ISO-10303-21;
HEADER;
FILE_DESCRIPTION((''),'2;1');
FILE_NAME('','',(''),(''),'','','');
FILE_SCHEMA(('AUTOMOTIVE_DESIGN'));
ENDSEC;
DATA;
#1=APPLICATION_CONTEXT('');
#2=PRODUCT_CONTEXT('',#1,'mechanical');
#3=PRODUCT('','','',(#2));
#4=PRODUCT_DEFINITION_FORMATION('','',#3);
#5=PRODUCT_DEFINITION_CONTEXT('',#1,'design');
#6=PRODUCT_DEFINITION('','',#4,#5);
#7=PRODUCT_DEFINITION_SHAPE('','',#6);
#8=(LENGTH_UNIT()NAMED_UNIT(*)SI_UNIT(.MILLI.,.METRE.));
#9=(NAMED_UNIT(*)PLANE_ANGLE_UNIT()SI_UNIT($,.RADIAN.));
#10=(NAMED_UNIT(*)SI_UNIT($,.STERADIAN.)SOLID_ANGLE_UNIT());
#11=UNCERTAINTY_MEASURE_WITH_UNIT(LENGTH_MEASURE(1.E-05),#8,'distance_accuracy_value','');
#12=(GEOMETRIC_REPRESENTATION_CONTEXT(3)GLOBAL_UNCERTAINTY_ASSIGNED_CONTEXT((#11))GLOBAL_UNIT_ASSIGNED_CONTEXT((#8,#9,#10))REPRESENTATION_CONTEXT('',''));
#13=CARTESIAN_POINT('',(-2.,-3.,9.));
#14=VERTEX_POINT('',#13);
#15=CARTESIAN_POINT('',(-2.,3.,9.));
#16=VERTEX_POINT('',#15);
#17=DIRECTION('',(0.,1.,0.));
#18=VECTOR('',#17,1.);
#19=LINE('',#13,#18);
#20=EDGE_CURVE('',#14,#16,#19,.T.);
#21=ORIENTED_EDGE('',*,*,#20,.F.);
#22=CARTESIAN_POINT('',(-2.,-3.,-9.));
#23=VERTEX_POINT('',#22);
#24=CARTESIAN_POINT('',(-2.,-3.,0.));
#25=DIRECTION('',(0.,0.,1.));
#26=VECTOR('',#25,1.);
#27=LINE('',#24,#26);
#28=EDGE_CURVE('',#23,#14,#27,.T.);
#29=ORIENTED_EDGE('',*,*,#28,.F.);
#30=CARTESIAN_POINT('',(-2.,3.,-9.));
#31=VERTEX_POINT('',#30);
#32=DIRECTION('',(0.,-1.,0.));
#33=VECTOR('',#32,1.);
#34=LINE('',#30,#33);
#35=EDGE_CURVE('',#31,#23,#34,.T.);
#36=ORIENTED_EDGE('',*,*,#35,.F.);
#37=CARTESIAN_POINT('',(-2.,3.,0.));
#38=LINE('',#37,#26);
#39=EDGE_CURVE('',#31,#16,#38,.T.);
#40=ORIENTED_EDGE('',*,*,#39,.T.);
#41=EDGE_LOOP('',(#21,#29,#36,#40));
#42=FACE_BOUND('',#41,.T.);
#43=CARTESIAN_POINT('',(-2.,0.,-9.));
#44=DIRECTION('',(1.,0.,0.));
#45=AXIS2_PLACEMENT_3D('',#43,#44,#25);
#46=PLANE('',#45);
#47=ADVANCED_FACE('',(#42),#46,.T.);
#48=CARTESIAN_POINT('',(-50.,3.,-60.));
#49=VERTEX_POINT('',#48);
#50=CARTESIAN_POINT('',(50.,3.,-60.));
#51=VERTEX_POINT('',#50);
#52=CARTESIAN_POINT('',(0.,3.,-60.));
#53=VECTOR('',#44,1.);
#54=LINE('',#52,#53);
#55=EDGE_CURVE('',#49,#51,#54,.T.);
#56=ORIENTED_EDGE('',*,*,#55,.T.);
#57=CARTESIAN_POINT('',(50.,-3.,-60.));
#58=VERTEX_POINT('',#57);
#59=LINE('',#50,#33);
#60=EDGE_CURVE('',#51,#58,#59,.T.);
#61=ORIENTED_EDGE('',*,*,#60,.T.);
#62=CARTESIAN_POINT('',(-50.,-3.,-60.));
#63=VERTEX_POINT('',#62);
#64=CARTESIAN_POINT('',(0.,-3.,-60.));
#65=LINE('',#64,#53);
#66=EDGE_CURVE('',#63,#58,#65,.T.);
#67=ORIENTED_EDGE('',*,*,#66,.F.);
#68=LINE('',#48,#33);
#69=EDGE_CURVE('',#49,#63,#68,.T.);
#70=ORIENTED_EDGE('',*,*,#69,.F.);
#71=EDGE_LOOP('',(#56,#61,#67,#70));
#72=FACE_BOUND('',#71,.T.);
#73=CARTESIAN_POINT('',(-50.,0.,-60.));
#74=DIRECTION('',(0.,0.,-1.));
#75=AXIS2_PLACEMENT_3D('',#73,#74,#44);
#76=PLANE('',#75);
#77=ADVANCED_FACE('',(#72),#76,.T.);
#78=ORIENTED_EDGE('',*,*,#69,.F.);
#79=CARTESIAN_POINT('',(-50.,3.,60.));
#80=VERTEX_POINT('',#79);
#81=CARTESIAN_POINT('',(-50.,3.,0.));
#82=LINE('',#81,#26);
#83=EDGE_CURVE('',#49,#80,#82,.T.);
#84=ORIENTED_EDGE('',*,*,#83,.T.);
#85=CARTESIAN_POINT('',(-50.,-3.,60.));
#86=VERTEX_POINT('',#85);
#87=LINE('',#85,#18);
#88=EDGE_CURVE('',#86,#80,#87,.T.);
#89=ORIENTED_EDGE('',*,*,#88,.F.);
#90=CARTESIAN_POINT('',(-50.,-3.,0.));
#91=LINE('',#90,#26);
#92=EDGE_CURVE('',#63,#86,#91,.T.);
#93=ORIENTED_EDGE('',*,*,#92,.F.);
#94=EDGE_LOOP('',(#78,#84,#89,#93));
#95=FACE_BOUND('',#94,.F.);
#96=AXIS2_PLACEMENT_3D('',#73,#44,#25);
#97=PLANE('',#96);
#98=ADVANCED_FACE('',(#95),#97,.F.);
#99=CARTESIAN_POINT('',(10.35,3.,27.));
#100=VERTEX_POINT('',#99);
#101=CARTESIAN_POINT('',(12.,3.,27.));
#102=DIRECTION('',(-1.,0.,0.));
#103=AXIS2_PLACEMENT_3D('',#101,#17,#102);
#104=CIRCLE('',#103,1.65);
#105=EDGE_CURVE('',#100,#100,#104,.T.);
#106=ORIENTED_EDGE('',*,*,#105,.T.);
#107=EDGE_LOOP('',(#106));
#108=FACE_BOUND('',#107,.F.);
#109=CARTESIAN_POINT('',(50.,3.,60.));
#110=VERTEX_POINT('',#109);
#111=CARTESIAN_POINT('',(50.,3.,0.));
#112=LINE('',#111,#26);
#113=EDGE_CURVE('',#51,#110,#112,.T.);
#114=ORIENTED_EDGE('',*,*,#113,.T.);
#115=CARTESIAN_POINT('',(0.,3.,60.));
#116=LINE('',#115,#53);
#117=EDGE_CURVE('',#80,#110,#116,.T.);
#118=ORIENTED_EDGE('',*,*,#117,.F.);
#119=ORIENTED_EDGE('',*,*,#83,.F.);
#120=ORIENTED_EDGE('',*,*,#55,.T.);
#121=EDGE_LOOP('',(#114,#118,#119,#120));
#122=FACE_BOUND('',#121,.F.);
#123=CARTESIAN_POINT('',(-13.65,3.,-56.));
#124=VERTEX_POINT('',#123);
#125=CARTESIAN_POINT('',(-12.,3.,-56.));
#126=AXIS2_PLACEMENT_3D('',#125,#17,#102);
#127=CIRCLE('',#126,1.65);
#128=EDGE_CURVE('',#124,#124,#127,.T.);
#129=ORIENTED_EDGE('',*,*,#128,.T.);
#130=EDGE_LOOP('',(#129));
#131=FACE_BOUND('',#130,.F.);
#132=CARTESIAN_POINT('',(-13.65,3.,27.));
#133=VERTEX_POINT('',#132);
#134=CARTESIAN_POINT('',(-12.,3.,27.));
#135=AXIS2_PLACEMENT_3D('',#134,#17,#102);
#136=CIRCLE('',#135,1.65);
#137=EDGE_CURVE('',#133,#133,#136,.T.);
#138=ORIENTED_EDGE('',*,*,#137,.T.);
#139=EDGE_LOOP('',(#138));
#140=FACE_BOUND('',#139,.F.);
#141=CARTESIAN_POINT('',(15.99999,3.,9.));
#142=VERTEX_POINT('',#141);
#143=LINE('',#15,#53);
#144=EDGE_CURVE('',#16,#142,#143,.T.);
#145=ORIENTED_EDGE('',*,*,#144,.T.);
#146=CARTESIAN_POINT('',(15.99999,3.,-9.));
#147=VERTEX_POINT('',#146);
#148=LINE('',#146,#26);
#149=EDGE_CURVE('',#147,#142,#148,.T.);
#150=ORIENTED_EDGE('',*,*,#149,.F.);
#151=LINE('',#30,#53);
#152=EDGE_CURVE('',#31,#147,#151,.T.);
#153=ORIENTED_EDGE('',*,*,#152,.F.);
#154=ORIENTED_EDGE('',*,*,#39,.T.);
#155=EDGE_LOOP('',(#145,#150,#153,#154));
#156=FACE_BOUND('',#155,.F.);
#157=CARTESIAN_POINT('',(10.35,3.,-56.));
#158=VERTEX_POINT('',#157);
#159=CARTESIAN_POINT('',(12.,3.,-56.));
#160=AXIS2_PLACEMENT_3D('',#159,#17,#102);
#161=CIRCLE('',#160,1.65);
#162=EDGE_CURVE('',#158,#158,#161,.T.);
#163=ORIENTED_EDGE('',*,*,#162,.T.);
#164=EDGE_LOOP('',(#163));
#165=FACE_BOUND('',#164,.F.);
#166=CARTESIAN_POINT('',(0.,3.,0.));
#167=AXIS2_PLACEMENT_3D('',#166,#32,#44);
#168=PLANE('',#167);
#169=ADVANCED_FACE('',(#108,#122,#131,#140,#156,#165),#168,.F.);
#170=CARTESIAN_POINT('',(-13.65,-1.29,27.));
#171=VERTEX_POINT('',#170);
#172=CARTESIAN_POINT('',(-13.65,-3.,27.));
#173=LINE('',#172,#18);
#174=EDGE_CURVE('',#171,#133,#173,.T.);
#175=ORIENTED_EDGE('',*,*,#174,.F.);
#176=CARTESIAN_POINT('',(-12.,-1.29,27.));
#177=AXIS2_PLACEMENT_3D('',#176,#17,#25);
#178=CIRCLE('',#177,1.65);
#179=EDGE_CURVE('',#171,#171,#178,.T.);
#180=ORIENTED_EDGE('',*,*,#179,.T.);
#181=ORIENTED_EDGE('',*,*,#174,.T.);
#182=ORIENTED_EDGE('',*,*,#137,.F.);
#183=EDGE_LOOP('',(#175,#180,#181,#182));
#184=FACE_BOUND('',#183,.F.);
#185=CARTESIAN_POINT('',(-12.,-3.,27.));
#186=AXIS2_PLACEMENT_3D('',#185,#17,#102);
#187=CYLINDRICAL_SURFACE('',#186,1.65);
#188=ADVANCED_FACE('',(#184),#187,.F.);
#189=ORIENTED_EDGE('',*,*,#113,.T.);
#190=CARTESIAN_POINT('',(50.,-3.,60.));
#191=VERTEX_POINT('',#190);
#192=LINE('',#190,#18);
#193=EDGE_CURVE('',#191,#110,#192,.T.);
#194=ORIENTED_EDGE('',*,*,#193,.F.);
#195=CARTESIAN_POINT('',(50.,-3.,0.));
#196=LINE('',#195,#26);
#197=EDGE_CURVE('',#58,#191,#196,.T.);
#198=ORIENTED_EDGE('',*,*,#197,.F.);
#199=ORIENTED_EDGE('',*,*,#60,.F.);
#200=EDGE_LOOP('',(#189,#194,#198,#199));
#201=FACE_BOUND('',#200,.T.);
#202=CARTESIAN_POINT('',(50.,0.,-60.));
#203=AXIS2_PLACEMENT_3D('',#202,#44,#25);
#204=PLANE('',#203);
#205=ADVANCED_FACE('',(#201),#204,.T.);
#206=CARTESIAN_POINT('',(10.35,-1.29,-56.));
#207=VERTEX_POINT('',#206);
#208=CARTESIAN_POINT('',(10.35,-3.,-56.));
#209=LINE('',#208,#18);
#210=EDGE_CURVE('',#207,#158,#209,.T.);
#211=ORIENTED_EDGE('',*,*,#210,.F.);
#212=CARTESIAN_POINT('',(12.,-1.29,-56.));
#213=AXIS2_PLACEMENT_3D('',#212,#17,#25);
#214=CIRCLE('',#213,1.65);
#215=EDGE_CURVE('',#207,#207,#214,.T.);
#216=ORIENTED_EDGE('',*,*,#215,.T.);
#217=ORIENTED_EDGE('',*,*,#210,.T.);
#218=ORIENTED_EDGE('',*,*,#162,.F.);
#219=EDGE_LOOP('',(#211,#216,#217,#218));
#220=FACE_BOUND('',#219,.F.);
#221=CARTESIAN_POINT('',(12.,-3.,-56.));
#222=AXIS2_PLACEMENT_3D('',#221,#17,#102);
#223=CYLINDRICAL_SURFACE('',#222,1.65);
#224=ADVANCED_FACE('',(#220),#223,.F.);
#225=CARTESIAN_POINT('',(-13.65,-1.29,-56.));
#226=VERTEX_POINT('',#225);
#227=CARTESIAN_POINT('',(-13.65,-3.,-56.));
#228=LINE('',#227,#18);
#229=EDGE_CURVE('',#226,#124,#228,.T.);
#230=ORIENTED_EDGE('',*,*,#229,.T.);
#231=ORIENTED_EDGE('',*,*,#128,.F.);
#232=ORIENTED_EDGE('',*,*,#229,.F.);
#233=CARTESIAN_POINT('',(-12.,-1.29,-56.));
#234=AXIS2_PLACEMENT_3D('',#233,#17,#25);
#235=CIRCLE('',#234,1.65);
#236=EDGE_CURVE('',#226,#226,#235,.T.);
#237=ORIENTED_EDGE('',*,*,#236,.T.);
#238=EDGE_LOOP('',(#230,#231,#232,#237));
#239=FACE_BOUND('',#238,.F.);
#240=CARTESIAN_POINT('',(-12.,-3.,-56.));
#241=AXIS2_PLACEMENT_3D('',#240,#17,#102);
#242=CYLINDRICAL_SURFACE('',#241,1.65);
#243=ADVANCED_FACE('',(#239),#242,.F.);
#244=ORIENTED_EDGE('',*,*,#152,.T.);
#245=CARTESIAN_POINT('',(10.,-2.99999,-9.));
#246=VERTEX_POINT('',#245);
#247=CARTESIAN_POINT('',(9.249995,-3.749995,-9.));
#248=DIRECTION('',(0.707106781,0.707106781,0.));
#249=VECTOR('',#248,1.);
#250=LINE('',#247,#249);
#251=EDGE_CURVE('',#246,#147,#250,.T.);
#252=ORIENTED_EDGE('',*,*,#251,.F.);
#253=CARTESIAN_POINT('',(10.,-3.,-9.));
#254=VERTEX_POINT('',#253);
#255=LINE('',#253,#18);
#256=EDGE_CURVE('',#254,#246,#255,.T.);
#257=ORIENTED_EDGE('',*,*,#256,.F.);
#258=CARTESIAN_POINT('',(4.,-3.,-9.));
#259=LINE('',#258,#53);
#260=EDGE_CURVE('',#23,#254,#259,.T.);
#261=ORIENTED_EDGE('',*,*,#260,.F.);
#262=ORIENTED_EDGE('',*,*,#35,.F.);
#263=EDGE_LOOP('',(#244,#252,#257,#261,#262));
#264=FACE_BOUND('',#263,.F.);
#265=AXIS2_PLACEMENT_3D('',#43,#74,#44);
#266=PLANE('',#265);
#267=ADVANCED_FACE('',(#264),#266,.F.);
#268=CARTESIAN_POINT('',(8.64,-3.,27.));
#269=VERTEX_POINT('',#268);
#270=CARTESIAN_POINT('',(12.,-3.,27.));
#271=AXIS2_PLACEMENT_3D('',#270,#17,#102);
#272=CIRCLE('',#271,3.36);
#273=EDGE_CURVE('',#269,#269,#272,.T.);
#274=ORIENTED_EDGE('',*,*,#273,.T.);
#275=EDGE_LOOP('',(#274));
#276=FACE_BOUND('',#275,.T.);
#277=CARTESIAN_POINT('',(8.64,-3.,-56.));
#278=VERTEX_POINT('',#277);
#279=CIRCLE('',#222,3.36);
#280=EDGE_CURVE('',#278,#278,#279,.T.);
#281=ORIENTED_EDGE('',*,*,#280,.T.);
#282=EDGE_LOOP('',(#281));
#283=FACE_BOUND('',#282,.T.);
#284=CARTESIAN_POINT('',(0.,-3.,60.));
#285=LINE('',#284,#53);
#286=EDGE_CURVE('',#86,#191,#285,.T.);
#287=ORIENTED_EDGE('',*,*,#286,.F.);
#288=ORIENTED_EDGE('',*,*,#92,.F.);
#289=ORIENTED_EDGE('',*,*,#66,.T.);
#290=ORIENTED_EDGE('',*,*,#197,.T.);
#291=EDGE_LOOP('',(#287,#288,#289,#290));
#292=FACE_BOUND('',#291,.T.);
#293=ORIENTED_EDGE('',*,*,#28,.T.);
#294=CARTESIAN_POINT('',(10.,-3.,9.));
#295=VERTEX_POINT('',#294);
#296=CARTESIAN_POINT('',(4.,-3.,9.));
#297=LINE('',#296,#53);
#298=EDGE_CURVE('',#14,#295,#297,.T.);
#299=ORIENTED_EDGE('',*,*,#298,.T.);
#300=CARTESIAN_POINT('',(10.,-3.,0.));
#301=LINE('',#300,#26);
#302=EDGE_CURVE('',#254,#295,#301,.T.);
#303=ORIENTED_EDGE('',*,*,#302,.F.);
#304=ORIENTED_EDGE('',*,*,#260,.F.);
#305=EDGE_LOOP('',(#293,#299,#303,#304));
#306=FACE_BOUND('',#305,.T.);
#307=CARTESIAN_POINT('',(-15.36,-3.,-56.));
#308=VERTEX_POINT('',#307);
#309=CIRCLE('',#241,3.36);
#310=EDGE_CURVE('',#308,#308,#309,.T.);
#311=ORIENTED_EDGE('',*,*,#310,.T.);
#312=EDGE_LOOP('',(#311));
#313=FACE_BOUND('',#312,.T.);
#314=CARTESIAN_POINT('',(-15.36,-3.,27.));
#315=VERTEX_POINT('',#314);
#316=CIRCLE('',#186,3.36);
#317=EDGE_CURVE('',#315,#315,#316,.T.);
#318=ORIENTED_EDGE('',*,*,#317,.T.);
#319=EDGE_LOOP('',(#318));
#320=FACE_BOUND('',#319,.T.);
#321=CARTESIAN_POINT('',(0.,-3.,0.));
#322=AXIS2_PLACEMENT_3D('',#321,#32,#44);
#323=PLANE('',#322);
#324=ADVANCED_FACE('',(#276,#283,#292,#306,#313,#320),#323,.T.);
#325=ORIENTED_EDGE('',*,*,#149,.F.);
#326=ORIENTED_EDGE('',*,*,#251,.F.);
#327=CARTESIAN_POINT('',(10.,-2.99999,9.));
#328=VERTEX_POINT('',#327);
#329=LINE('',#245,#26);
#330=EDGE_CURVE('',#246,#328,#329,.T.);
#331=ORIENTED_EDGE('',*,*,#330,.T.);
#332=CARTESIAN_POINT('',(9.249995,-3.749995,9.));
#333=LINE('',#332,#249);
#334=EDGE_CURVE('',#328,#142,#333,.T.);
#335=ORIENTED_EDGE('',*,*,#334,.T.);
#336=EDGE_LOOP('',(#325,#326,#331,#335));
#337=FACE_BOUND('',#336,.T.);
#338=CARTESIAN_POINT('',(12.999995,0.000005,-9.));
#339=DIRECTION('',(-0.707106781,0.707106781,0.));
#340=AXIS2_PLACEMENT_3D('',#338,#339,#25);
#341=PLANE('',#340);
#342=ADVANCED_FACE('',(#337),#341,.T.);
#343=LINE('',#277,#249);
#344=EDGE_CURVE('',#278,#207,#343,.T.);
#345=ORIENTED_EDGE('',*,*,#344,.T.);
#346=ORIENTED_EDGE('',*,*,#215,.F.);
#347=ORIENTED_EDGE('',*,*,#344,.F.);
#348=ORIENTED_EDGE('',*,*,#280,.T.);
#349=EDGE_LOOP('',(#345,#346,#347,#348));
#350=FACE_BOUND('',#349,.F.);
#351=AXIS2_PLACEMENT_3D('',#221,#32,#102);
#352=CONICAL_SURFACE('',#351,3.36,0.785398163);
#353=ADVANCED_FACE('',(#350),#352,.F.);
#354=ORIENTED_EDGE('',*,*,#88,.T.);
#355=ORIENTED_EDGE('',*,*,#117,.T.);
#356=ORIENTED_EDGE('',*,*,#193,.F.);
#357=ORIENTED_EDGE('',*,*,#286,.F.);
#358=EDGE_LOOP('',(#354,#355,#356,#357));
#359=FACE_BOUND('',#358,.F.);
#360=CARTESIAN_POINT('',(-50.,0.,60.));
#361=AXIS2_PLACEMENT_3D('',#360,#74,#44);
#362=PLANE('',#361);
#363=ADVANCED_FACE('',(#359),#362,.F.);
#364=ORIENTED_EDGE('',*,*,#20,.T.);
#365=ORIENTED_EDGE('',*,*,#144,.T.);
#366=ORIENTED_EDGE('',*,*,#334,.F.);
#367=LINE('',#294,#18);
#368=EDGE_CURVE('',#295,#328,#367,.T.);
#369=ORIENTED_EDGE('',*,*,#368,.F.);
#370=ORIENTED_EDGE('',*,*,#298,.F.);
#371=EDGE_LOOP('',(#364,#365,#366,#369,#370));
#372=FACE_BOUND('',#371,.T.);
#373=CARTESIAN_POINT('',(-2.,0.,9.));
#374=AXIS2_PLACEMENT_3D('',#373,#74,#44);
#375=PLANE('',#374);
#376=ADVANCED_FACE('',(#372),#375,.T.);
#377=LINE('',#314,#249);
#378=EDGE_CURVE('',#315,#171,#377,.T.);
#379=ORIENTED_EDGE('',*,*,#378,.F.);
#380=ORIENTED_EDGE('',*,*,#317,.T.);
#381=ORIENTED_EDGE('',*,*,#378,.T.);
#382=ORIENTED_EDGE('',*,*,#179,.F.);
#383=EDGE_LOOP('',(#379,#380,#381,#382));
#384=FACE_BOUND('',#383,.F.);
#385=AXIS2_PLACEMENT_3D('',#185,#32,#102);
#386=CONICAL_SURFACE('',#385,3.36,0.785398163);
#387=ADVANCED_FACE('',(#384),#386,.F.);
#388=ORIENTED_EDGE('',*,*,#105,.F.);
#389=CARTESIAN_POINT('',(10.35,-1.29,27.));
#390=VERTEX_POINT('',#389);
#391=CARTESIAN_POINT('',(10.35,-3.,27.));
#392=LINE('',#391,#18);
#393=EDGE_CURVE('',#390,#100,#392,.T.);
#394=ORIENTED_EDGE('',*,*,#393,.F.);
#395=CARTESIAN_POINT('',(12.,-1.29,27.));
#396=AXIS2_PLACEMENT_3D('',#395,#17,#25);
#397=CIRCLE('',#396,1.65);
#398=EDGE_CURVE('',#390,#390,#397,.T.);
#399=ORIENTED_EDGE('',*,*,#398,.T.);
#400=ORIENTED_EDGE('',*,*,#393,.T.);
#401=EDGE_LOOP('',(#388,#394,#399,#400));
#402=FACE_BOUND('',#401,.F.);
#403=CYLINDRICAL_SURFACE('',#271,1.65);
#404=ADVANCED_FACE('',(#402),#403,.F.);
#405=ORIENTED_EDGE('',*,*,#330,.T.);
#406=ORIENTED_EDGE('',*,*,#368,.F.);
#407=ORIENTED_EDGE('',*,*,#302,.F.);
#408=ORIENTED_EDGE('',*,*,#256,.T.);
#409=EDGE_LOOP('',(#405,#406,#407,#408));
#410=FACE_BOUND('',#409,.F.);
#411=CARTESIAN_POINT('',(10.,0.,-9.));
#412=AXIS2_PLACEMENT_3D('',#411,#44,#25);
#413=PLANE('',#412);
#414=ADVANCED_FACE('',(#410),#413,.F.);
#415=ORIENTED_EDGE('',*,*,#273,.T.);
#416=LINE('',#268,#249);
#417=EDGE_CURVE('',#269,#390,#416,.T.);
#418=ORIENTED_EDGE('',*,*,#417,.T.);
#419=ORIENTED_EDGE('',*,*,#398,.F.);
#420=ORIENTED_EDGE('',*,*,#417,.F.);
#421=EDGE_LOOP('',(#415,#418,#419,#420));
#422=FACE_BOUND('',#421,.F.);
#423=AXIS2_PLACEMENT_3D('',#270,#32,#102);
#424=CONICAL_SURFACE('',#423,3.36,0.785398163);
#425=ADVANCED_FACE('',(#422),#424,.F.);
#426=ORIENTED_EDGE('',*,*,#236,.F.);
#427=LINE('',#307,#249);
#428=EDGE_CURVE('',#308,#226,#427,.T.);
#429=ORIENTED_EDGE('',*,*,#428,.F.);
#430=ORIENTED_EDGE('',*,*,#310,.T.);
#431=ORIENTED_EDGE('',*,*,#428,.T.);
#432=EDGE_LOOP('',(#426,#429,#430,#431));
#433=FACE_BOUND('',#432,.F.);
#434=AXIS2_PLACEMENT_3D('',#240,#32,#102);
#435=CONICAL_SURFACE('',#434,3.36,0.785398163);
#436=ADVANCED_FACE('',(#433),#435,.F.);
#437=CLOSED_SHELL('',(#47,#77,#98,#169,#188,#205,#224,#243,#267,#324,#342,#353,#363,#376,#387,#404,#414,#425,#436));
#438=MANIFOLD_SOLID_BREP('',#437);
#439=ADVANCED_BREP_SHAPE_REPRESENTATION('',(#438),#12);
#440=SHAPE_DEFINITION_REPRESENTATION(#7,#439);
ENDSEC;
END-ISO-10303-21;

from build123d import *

# Parameters (mm, degrees)
F0_W           = 100
F0_H           = 120
F0_W_2         = 12
F0_H_2         = 18
F1_DEPTH       = 3
F2_SIZE        = 5.99999
F4_D           = 3.3
F4_CSINK_D     = 6.72
F4_CSINK_ANGLE = 90


# Not quite as in the source:
# - a fillet or chamfer is up to 0.001 mm smaller than in the source, because OpenCascade refuses the exact size


with BuildPart() as f1:
    # F0 (on Front) → F1 (new body, symmetric)
    with BuildSketch(Plane.XZ):
        Rectangle(F0_W, F0_H)
        with Locations((4, 0)):
            Rectangle(F0_W_2, F0_H_2, mode=Mode.SUBTRACT)
    extrude(amount=F1_DEPTH, both=True)

    # F2 (size 6 in the source; OpenCascade refuses exactly that, so slightly less here)
    f2_edges = [f1.edges().sort_by_distance(p)[0] for p in [
        (10, 3, 0),
    ]]
    chamfer(f2_edges, length=F2_SIZE)

    # F4 (through all)
    with Locations(Plane.XZ.offset(3)):
        with Locations((-12, 27), (12, 27), (12, -56), (-12, -56)):
            CounterSinkHole(F4_D / 2, F4_CSINK_D / 2, counter_sink_angle=F4_CSINK_ANGLE)


solid = f1.part
